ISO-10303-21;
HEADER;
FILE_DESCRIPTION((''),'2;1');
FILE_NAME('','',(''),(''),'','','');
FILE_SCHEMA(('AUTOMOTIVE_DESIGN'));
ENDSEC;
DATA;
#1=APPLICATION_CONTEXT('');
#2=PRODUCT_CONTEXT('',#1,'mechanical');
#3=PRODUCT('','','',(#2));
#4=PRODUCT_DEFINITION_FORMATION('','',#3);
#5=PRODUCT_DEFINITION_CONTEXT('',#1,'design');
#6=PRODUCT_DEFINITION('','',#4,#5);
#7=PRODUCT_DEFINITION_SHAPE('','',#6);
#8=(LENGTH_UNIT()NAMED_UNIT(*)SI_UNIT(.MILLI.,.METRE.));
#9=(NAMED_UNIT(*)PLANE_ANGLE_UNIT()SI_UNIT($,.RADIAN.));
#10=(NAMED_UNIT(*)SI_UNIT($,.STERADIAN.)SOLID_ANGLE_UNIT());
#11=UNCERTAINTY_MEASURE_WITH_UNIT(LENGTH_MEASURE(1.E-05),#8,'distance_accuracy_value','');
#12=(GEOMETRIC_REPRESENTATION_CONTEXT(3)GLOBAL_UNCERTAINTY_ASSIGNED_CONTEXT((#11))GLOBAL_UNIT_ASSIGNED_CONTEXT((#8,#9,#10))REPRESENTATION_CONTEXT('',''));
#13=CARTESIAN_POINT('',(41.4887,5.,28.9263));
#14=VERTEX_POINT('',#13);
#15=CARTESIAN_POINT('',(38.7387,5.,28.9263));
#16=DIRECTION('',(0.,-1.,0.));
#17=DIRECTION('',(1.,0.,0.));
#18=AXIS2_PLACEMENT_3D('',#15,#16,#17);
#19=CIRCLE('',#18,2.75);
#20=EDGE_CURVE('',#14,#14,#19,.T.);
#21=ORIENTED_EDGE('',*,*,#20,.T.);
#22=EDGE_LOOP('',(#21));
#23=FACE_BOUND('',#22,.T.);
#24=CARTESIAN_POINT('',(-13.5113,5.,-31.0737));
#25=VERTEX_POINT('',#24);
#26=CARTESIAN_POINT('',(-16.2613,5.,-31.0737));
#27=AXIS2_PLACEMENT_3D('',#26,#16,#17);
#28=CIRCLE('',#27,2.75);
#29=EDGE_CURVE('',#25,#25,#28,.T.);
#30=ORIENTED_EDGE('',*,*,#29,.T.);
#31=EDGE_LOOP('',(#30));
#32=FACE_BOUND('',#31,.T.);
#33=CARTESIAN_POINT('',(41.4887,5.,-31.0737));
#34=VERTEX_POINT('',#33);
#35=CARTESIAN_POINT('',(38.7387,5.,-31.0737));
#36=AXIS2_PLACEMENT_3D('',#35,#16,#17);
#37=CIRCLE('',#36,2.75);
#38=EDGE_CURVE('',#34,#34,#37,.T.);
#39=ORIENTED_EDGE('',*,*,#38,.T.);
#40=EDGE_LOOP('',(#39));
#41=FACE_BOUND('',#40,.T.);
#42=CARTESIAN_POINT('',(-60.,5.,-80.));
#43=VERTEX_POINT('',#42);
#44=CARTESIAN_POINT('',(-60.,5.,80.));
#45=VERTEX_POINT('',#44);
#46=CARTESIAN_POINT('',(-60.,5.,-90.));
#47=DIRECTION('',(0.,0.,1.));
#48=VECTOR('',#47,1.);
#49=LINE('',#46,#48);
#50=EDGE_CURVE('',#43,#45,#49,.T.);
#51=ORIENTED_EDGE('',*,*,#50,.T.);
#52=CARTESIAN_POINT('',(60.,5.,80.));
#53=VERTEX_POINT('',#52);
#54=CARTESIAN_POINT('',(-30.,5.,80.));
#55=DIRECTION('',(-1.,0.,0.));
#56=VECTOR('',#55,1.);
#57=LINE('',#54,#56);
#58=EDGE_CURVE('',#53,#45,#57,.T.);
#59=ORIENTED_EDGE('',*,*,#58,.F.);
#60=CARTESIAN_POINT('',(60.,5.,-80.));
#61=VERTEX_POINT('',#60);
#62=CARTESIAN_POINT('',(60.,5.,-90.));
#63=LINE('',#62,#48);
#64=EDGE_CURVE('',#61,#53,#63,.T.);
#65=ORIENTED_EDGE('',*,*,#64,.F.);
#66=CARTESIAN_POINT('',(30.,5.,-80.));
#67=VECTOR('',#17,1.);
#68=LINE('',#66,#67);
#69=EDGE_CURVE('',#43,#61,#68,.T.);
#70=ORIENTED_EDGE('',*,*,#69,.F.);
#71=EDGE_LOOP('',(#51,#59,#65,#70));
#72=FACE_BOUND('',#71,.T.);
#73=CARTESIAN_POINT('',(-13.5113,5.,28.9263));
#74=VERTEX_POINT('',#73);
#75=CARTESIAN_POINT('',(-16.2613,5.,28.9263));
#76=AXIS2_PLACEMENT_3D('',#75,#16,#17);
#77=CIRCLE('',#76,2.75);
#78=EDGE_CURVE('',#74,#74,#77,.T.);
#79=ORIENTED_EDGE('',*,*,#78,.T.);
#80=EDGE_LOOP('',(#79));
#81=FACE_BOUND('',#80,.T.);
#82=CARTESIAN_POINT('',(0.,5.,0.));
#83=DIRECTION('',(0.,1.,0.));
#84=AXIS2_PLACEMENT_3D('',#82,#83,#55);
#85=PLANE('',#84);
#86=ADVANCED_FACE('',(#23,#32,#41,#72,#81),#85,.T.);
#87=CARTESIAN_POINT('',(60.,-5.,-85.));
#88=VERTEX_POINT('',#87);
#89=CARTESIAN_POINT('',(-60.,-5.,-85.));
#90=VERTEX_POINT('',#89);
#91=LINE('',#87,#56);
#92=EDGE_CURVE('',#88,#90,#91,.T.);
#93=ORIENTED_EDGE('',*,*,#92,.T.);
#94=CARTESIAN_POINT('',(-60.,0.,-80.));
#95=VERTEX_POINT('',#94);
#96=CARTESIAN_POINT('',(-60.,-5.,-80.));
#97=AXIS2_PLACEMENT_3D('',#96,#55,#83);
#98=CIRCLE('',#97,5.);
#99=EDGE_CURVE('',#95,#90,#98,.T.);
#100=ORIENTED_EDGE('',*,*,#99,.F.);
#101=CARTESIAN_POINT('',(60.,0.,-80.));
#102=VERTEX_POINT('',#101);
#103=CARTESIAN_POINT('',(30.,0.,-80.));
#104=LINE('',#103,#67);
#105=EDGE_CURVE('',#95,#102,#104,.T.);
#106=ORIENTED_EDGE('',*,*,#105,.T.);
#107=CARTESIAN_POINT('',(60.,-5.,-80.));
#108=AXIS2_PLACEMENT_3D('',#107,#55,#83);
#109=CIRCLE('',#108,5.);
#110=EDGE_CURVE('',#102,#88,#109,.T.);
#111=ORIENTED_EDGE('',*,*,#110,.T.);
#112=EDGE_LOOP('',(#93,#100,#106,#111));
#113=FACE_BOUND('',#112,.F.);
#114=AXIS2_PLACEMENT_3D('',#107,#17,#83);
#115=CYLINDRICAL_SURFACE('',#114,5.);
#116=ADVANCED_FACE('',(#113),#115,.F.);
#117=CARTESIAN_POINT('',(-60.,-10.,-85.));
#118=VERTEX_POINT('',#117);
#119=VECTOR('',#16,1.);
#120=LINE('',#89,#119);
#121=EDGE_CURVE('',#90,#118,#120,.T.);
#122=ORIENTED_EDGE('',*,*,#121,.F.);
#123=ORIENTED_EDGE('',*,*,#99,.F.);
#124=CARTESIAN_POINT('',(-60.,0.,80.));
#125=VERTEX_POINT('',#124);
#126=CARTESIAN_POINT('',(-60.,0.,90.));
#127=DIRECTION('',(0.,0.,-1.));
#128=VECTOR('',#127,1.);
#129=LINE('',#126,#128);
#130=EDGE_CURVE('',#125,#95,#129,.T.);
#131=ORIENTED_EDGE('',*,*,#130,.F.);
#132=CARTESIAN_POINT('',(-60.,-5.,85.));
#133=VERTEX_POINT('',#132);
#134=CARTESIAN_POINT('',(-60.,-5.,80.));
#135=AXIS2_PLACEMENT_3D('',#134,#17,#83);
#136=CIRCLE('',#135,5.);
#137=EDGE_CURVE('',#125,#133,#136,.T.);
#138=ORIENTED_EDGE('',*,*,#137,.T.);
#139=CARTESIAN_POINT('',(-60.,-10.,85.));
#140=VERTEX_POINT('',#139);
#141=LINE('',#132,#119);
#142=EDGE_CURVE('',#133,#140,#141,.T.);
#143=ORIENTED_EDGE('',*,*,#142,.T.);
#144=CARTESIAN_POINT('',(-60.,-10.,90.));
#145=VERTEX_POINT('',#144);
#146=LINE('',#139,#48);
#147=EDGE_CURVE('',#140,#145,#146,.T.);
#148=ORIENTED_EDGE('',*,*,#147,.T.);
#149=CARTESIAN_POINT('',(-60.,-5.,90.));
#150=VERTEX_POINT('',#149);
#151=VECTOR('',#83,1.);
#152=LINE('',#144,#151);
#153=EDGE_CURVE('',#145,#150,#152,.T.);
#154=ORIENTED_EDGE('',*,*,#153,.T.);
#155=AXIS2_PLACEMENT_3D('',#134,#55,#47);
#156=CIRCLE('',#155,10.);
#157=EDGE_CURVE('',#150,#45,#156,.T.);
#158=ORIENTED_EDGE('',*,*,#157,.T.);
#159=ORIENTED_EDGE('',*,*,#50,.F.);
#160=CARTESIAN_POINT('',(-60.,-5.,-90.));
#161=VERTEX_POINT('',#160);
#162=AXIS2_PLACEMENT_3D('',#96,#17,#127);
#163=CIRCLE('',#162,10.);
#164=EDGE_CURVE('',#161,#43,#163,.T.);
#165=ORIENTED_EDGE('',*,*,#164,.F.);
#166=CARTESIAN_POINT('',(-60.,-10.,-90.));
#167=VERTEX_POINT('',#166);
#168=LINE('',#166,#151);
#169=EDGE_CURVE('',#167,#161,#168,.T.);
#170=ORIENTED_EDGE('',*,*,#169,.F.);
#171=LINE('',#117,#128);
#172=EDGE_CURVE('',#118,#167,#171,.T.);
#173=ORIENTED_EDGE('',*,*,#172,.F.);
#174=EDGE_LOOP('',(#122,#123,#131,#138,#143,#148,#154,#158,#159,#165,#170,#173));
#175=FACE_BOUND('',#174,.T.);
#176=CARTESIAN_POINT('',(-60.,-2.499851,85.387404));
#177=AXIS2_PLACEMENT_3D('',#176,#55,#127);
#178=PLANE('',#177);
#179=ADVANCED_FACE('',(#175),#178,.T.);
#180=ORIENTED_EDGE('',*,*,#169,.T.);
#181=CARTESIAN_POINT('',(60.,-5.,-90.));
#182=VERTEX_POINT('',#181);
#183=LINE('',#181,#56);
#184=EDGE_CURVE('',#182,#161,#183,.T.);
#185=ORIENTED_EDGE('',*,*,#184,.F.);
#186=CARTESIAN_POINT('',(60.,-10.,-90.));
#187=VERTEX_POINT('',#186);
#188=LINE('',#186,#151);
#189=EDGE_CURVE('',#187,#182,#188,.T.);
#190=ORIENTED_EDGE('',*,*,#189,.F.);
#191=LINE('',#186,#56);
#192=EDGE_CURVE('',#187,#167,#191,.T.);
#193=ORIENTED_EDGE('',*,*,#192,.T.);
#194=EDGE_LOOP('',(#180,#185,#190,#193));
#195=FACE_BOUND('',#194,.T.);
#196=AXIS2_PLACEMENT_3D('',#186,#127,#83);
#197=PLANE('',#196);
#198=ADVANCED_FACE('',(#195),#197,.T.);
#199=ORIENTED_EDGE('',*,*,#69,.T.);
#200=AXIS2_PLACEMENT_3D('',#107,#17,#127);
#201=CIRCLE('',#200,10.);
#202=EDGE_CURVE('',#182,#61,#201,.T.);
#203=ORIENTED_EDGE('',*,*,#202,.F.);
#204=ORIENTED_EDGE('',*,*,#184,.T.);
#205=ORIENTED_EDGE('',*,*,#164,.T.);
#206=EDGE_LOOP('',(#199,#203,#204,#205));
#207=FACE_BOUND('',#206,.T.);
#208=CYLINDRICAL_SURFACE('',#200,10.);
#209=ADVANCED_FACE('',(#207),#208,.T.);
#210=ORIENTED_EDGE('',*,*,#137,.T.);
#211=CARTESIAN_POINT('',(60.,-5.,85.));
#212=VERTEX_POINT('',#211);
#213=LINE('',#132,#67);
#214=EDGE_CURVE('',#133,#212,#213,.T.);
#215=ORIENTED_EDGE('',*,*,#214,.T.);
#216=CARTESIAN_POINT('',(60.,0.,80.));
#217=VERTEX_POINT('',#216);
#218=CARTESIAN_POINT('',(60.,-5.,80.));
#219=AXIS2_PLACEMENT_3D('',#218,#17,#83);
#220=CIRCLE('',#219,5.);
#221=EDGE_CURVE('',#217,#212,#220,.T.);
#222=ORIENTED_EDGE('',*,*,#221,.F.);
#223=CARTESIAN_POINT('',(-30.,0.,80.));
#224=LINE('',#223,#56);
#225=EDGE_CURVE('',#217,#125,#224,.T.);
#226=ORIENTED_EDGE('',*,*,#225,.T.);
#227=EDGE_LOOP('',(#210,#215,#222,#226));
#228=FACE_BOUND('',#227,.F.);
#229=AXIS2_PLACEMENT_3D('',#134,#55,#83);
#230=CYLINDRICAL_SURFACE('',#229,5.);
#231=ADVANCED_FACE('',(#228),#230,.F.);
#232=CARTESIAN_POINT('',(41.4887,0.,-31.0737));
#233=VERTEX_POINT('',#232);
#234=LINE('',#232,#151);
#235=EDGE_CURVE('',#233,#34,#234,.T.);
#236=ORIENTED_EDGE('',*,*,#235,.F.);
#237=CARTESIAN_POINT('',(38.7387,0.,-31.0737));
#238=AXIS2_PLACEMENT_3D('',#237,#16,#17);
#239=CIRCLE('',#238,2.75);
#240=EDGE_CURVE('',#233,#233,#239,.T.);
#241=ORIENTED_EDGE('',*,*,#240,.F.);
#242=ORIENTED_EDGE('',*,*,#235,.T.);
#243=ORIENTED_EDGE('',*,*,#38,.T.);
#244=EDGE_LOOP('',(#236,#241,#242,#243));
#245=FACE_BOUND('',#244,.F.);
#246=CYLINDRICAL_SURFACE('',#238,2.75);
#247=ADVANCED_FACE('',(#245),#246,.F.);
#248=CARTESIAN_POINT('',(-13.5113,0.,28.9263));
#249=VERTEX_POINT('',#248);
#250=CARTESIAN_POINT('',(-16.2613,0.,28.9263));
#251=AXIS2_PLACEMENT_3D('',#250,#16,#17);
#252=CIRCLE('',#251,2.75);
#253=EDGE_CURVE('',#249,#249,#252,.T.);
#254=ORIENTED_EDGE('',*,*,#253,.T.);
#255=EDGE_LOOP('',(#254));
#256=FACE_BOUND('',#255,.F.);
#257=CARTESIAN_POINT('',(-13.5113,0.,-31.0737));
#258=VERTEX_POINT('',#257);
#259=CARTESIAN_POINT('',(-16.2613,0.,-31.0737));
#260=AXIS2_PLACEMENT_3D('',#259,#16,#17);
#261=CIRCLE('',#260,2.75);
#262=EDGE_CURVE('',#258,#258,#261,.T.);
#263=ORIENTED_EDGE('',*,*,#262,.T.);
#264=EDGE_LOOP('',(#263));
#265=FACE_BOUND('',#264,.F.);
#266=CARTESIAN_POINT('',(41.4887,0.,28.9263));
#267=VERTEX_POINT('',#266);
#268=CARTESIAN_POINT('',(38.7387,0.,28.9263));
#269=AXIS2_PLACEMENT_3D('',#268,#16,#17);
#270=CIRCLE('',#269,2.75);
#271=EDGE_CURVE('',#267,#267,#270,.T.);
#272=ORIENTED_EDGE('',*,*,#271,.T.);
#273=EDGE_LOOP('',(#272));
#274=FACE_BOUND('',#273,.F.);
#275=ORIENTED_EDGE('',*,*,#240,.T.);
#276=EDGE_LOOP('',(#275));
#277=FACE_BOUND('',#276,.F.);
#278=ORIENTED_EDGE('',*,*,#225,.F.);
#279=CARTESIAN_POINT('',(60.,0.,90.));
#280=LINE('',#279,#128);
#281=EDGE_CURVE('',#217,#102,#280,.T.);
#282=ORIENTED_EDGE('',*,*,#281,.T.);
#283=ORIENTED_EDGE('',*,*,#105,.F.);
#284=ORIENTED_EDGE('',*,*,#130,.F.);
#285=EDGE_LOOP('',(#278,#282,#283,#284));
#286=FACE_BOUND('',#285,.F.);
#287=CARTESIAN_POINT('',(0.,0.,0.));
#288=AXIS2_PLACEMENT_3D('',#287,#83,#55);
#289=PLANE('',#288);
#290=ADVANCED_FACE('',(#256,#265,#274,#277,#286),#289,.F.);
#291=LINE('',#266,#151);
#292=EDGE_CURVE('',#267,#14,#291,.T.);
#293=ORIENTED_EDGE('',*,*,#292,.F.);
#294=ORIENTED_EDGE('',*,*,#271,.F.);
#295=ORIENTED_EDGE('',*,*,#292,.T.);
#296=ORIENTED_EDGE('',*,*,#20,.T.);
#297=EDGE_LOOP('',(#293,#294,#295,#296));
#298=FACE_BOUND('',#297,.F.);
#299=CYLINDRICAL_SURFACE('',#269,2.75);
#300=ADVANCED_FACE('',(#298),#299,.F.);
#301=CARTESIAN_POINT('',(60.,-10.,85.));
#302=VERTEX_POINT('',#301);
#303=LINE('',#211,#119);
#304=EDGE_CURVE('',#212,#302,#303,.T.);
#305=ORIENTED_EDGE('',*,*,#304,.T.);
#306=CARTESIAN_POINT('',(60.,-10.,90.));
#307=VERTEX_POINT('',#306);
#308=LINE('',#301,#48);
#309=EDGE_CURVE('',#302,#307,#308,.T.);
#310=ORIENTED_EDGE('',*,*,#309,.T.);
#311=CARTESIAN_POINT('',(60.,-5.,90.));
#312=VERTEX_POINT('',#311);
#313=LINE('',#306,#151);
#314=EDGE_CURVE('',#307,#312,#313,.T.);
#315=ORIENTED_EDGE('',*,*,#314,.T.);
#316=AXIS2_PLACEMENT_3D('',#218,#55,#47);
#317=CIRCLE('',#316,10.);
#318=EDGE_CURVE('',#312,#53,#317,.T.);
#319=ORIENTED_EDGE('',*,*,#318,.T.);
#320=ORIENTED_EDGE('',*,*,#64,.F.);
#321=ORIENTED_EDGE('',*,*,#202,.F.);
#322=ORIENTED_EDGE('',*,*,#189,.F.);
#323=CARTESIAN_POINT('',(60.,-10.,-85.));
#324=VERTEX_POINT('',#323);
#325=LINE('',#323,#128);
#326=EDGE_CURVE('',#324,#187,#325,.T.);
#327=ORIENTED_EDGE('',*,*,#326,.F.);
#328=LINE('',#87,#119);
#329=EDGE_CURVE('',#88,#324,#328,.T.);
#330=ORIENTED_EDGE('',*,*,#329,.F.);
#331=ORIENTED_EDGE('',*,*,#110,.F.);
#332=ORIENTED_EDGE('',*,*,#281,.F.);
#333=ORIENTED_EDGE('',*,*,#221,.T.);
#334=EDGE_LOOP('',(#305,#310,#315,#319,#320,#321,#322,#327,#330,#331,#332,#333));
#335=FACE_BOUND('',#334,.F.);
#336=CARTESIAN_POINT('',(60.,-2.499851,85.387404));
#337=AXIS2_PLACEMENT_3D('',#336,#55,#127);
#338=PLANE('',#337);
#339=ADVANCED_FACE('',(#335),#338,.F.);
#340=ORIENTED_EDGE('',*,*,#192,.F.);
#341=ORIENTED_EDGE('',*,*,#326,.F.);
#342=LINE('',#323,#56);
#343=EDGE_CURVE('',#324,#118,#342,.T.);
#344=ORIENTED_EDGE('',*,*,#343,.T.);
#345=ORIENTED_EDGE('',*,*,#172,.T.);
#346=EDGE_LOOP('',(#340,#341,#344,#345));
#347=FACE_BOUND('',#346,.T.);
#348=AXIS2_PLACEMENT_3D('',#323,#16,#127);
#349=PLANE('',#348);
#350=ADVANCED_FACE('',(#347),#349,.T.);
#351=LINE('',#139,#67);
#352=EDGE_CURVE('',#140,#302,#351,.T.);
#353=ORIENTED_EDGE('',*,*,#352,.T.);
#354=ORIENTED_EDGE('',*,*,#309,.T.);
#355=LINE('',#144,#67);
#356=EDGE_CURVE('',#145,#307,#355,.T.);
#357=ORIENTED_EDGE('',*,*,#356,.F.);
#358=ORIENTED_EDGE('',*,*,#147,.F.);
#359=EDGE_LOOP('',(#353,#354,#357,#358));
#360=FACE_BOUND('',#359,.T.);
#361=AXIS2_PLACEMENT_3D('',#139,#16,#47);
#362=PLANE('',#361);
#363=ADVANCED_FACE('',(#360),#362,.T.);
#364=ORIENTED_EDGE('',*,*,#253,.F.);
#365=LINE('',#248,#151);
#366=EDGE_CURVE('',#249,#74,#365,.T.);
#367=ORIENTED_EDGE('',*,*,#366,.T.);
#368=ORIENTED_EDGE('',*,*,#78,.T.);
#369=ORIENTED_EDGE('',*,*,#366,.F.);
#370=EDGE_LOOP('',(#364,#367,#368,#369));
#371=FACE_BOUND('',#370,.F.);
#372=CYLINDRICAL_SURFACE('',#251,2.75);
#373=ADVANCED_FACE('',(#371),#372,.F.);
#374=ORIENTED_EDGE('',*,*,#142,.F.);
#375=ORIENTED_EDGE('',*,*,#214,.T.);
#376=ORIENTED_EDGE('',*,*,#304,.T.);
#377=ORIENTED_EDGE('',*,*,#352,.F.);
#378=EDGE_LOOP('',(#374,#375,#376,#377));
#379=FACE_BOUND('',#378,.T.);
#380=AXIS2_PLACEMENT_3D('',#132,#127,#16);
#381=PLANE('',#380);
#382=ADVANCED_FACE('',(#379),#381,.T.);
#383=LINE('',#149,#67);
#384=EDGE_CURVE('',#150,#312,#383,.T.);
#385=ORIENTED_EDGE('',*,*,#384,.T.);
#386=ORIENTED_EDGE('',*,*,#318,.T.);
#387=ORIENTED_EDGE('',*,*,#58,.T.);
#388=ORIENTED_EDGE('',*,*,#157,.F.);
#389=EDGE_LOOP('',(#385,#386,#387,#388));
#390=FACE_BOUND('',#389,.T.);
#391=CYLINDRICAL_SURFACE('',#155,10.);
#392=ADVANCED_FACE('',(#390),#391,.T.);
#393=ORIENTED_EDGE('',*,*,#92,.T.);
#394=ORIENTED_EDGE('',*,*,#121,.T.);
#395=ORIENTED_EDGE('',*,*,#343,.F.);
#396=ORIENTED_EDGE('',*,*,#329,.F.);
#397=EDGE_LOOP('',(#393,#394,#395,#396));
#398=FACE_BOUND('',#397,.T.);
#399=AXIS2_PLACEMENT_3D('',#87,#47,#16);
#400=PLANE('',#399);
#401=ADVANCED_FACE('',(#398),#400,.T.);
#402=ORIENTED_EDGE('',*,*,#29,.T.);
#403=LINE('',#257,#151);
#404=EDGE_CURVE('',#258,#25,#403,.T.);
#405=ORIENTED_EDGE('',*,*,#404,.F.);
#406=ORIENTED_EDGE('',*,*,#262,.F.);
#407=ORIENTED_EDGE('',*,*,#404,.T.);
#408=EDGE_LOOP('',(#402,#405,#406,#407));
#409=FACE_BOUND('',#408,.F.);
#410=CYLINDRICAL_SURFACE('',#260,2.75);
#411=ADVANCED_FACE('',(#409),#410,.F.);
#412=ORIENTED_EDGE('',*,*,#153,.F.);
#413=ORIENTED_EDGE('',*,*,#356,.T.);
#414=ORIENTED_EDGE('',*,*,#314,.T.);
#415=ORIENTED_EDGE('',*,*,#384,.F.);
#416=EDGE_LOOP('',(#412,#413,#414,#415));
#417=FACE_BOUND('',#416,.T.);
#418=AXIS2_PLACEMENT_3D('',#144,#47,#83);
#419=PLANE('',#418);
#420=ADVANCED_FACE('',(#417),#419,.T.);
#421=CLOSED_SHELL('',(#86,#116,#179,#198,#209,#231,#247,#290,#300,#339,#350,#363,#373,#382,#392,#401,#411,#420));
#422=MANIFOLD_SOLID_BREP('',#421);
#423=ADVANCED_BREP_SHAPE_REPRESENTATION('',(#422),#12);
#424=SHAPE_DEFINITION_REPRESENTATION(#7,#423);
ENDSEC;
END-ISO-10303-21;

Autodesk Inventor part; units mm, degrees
ref_plane "YZ Plane" through (0, 0, 0) normal (1, 0, 0) x (0, 1, 0)
ref_plane "XZ Plane" through (0, 0, 0) normal (0, 1, 0) x (-1, 0, 0)
ref_plane "XY Plane" through (0, 0, 0) normal (0, 0, 1) x (1, 0, 0)
sketch "Sketch1" plane through (0, 0, 0) normal (0, 1, 0) x (-1, 0, 0)
  line L0 (-60, 105) -> (60, 105)
  line L1 (60, 105) -> (60, 90)
  line L2 (60, -105) -> (-60, -105)
  line L3 (-60, -105) -> (-60, -90)
  line L4 (-60, 105) -> (60, -105) construction
  line L5 (60, 105) -> (-60, -105) construction
  line L6 (60, 90) -> (-60, 90)
  line L7 (60, -90) -> (-60, -90)
  line L8 (60, 90) -> (60, -90)
  line L9 (60, -90) -> (60, -105)
  line L10 (-60, -90) -> (-60, 90)
  line L11 (-60, 90) -> (-60, 105)
  line L12 (84, 0) -> (-84, 0)
  line L13 (0, -147) -> (0, 147)
  point P0 (0, 0)
  dimension "d0" = 180
  dimension "d1" = 15
  dimension "d2" = 120
extrude "Plate1" add sketch "Sketch1" along normal blind 5 contours L6 L13 L12 L10 | L6 L8 L12 L13 | L12 L13 L7 L10 | L12 L8 L7 L13
sketch "Sketch2" plane through (-60, 5, 85) normal (0, 0, 1) x (1, 0, 0)
  line L0 (120, 0) -> (0, 0)
  line L1 (0, 0) -> (0, -15)
  line L2 (0, -15) -> (120, -15)
  line L3 (120, -15) -> (120, 0)
edge flange "Flange1" height 15 angle 90 thickness 5 bend radius 5 thickness toward (0, 0, 1) relief tear relief width 5 relief depth 2.5 corner gap 5 corner form 0 edges at (0, 0, 90) (0, 0, -90) wall of the first edge with corners at (60, 5, 85) (-60, 5, 85) (-60, -10, 85) (60, -10, 85)
bend "Bend1"
corner "Corner1"
sketch "Sketch3" plane through (0, 0, 0) normal (0, -1, 0) x (1, 0, 0)
  circle A0 centre (-16.2613, 28.9263) radius 2.75 projected
  circle A1 centre (38.7387, 28.9263) radius 2.75 projected
  circle A2 centre (-16.2613, -31.0737) radius 2.75 projected
  circle A3 centre (38.7387, -31.0737) radius 2.75 projected
  point P0 (0, 0)
extrude "Extrusion1" cut sketch "Sketch3" against normal through all
equation "\"d3\" = Thickness"
equation "\"d4\" = BendReliefWidth"
equation "\"d5\" = BendReliefDepth"
equation "\"d6\" = MinimumRemnant"
equation "\"d7\" = TransitionRadius"
equation "\"d10\" = BendRadius"
equation "\"d11\" = CornerReliefSize"
equation "\"d12\" = GapSize"
equation "\"d13\" = JacobiRadiusSize"
equation "\"BendRadius\" = Thickness"
equation "\"BendReliefWidth\" = Thickness"
equation "\"BendReliefDepth\" = 0.5 * Thickness"
equation "\"TransitionRadius\" = BendRadius"
equation "\"JacobiRadiusSize\" = BendRadius"
equation "\"GapSize\" = Thickness"
equation "\"Thickness\" = 5"
equation "\"MinimumRemnant\" = 10"
equation "\"CornerReliefSize\" = 20"
properties part number "shapeoko_zplate"
